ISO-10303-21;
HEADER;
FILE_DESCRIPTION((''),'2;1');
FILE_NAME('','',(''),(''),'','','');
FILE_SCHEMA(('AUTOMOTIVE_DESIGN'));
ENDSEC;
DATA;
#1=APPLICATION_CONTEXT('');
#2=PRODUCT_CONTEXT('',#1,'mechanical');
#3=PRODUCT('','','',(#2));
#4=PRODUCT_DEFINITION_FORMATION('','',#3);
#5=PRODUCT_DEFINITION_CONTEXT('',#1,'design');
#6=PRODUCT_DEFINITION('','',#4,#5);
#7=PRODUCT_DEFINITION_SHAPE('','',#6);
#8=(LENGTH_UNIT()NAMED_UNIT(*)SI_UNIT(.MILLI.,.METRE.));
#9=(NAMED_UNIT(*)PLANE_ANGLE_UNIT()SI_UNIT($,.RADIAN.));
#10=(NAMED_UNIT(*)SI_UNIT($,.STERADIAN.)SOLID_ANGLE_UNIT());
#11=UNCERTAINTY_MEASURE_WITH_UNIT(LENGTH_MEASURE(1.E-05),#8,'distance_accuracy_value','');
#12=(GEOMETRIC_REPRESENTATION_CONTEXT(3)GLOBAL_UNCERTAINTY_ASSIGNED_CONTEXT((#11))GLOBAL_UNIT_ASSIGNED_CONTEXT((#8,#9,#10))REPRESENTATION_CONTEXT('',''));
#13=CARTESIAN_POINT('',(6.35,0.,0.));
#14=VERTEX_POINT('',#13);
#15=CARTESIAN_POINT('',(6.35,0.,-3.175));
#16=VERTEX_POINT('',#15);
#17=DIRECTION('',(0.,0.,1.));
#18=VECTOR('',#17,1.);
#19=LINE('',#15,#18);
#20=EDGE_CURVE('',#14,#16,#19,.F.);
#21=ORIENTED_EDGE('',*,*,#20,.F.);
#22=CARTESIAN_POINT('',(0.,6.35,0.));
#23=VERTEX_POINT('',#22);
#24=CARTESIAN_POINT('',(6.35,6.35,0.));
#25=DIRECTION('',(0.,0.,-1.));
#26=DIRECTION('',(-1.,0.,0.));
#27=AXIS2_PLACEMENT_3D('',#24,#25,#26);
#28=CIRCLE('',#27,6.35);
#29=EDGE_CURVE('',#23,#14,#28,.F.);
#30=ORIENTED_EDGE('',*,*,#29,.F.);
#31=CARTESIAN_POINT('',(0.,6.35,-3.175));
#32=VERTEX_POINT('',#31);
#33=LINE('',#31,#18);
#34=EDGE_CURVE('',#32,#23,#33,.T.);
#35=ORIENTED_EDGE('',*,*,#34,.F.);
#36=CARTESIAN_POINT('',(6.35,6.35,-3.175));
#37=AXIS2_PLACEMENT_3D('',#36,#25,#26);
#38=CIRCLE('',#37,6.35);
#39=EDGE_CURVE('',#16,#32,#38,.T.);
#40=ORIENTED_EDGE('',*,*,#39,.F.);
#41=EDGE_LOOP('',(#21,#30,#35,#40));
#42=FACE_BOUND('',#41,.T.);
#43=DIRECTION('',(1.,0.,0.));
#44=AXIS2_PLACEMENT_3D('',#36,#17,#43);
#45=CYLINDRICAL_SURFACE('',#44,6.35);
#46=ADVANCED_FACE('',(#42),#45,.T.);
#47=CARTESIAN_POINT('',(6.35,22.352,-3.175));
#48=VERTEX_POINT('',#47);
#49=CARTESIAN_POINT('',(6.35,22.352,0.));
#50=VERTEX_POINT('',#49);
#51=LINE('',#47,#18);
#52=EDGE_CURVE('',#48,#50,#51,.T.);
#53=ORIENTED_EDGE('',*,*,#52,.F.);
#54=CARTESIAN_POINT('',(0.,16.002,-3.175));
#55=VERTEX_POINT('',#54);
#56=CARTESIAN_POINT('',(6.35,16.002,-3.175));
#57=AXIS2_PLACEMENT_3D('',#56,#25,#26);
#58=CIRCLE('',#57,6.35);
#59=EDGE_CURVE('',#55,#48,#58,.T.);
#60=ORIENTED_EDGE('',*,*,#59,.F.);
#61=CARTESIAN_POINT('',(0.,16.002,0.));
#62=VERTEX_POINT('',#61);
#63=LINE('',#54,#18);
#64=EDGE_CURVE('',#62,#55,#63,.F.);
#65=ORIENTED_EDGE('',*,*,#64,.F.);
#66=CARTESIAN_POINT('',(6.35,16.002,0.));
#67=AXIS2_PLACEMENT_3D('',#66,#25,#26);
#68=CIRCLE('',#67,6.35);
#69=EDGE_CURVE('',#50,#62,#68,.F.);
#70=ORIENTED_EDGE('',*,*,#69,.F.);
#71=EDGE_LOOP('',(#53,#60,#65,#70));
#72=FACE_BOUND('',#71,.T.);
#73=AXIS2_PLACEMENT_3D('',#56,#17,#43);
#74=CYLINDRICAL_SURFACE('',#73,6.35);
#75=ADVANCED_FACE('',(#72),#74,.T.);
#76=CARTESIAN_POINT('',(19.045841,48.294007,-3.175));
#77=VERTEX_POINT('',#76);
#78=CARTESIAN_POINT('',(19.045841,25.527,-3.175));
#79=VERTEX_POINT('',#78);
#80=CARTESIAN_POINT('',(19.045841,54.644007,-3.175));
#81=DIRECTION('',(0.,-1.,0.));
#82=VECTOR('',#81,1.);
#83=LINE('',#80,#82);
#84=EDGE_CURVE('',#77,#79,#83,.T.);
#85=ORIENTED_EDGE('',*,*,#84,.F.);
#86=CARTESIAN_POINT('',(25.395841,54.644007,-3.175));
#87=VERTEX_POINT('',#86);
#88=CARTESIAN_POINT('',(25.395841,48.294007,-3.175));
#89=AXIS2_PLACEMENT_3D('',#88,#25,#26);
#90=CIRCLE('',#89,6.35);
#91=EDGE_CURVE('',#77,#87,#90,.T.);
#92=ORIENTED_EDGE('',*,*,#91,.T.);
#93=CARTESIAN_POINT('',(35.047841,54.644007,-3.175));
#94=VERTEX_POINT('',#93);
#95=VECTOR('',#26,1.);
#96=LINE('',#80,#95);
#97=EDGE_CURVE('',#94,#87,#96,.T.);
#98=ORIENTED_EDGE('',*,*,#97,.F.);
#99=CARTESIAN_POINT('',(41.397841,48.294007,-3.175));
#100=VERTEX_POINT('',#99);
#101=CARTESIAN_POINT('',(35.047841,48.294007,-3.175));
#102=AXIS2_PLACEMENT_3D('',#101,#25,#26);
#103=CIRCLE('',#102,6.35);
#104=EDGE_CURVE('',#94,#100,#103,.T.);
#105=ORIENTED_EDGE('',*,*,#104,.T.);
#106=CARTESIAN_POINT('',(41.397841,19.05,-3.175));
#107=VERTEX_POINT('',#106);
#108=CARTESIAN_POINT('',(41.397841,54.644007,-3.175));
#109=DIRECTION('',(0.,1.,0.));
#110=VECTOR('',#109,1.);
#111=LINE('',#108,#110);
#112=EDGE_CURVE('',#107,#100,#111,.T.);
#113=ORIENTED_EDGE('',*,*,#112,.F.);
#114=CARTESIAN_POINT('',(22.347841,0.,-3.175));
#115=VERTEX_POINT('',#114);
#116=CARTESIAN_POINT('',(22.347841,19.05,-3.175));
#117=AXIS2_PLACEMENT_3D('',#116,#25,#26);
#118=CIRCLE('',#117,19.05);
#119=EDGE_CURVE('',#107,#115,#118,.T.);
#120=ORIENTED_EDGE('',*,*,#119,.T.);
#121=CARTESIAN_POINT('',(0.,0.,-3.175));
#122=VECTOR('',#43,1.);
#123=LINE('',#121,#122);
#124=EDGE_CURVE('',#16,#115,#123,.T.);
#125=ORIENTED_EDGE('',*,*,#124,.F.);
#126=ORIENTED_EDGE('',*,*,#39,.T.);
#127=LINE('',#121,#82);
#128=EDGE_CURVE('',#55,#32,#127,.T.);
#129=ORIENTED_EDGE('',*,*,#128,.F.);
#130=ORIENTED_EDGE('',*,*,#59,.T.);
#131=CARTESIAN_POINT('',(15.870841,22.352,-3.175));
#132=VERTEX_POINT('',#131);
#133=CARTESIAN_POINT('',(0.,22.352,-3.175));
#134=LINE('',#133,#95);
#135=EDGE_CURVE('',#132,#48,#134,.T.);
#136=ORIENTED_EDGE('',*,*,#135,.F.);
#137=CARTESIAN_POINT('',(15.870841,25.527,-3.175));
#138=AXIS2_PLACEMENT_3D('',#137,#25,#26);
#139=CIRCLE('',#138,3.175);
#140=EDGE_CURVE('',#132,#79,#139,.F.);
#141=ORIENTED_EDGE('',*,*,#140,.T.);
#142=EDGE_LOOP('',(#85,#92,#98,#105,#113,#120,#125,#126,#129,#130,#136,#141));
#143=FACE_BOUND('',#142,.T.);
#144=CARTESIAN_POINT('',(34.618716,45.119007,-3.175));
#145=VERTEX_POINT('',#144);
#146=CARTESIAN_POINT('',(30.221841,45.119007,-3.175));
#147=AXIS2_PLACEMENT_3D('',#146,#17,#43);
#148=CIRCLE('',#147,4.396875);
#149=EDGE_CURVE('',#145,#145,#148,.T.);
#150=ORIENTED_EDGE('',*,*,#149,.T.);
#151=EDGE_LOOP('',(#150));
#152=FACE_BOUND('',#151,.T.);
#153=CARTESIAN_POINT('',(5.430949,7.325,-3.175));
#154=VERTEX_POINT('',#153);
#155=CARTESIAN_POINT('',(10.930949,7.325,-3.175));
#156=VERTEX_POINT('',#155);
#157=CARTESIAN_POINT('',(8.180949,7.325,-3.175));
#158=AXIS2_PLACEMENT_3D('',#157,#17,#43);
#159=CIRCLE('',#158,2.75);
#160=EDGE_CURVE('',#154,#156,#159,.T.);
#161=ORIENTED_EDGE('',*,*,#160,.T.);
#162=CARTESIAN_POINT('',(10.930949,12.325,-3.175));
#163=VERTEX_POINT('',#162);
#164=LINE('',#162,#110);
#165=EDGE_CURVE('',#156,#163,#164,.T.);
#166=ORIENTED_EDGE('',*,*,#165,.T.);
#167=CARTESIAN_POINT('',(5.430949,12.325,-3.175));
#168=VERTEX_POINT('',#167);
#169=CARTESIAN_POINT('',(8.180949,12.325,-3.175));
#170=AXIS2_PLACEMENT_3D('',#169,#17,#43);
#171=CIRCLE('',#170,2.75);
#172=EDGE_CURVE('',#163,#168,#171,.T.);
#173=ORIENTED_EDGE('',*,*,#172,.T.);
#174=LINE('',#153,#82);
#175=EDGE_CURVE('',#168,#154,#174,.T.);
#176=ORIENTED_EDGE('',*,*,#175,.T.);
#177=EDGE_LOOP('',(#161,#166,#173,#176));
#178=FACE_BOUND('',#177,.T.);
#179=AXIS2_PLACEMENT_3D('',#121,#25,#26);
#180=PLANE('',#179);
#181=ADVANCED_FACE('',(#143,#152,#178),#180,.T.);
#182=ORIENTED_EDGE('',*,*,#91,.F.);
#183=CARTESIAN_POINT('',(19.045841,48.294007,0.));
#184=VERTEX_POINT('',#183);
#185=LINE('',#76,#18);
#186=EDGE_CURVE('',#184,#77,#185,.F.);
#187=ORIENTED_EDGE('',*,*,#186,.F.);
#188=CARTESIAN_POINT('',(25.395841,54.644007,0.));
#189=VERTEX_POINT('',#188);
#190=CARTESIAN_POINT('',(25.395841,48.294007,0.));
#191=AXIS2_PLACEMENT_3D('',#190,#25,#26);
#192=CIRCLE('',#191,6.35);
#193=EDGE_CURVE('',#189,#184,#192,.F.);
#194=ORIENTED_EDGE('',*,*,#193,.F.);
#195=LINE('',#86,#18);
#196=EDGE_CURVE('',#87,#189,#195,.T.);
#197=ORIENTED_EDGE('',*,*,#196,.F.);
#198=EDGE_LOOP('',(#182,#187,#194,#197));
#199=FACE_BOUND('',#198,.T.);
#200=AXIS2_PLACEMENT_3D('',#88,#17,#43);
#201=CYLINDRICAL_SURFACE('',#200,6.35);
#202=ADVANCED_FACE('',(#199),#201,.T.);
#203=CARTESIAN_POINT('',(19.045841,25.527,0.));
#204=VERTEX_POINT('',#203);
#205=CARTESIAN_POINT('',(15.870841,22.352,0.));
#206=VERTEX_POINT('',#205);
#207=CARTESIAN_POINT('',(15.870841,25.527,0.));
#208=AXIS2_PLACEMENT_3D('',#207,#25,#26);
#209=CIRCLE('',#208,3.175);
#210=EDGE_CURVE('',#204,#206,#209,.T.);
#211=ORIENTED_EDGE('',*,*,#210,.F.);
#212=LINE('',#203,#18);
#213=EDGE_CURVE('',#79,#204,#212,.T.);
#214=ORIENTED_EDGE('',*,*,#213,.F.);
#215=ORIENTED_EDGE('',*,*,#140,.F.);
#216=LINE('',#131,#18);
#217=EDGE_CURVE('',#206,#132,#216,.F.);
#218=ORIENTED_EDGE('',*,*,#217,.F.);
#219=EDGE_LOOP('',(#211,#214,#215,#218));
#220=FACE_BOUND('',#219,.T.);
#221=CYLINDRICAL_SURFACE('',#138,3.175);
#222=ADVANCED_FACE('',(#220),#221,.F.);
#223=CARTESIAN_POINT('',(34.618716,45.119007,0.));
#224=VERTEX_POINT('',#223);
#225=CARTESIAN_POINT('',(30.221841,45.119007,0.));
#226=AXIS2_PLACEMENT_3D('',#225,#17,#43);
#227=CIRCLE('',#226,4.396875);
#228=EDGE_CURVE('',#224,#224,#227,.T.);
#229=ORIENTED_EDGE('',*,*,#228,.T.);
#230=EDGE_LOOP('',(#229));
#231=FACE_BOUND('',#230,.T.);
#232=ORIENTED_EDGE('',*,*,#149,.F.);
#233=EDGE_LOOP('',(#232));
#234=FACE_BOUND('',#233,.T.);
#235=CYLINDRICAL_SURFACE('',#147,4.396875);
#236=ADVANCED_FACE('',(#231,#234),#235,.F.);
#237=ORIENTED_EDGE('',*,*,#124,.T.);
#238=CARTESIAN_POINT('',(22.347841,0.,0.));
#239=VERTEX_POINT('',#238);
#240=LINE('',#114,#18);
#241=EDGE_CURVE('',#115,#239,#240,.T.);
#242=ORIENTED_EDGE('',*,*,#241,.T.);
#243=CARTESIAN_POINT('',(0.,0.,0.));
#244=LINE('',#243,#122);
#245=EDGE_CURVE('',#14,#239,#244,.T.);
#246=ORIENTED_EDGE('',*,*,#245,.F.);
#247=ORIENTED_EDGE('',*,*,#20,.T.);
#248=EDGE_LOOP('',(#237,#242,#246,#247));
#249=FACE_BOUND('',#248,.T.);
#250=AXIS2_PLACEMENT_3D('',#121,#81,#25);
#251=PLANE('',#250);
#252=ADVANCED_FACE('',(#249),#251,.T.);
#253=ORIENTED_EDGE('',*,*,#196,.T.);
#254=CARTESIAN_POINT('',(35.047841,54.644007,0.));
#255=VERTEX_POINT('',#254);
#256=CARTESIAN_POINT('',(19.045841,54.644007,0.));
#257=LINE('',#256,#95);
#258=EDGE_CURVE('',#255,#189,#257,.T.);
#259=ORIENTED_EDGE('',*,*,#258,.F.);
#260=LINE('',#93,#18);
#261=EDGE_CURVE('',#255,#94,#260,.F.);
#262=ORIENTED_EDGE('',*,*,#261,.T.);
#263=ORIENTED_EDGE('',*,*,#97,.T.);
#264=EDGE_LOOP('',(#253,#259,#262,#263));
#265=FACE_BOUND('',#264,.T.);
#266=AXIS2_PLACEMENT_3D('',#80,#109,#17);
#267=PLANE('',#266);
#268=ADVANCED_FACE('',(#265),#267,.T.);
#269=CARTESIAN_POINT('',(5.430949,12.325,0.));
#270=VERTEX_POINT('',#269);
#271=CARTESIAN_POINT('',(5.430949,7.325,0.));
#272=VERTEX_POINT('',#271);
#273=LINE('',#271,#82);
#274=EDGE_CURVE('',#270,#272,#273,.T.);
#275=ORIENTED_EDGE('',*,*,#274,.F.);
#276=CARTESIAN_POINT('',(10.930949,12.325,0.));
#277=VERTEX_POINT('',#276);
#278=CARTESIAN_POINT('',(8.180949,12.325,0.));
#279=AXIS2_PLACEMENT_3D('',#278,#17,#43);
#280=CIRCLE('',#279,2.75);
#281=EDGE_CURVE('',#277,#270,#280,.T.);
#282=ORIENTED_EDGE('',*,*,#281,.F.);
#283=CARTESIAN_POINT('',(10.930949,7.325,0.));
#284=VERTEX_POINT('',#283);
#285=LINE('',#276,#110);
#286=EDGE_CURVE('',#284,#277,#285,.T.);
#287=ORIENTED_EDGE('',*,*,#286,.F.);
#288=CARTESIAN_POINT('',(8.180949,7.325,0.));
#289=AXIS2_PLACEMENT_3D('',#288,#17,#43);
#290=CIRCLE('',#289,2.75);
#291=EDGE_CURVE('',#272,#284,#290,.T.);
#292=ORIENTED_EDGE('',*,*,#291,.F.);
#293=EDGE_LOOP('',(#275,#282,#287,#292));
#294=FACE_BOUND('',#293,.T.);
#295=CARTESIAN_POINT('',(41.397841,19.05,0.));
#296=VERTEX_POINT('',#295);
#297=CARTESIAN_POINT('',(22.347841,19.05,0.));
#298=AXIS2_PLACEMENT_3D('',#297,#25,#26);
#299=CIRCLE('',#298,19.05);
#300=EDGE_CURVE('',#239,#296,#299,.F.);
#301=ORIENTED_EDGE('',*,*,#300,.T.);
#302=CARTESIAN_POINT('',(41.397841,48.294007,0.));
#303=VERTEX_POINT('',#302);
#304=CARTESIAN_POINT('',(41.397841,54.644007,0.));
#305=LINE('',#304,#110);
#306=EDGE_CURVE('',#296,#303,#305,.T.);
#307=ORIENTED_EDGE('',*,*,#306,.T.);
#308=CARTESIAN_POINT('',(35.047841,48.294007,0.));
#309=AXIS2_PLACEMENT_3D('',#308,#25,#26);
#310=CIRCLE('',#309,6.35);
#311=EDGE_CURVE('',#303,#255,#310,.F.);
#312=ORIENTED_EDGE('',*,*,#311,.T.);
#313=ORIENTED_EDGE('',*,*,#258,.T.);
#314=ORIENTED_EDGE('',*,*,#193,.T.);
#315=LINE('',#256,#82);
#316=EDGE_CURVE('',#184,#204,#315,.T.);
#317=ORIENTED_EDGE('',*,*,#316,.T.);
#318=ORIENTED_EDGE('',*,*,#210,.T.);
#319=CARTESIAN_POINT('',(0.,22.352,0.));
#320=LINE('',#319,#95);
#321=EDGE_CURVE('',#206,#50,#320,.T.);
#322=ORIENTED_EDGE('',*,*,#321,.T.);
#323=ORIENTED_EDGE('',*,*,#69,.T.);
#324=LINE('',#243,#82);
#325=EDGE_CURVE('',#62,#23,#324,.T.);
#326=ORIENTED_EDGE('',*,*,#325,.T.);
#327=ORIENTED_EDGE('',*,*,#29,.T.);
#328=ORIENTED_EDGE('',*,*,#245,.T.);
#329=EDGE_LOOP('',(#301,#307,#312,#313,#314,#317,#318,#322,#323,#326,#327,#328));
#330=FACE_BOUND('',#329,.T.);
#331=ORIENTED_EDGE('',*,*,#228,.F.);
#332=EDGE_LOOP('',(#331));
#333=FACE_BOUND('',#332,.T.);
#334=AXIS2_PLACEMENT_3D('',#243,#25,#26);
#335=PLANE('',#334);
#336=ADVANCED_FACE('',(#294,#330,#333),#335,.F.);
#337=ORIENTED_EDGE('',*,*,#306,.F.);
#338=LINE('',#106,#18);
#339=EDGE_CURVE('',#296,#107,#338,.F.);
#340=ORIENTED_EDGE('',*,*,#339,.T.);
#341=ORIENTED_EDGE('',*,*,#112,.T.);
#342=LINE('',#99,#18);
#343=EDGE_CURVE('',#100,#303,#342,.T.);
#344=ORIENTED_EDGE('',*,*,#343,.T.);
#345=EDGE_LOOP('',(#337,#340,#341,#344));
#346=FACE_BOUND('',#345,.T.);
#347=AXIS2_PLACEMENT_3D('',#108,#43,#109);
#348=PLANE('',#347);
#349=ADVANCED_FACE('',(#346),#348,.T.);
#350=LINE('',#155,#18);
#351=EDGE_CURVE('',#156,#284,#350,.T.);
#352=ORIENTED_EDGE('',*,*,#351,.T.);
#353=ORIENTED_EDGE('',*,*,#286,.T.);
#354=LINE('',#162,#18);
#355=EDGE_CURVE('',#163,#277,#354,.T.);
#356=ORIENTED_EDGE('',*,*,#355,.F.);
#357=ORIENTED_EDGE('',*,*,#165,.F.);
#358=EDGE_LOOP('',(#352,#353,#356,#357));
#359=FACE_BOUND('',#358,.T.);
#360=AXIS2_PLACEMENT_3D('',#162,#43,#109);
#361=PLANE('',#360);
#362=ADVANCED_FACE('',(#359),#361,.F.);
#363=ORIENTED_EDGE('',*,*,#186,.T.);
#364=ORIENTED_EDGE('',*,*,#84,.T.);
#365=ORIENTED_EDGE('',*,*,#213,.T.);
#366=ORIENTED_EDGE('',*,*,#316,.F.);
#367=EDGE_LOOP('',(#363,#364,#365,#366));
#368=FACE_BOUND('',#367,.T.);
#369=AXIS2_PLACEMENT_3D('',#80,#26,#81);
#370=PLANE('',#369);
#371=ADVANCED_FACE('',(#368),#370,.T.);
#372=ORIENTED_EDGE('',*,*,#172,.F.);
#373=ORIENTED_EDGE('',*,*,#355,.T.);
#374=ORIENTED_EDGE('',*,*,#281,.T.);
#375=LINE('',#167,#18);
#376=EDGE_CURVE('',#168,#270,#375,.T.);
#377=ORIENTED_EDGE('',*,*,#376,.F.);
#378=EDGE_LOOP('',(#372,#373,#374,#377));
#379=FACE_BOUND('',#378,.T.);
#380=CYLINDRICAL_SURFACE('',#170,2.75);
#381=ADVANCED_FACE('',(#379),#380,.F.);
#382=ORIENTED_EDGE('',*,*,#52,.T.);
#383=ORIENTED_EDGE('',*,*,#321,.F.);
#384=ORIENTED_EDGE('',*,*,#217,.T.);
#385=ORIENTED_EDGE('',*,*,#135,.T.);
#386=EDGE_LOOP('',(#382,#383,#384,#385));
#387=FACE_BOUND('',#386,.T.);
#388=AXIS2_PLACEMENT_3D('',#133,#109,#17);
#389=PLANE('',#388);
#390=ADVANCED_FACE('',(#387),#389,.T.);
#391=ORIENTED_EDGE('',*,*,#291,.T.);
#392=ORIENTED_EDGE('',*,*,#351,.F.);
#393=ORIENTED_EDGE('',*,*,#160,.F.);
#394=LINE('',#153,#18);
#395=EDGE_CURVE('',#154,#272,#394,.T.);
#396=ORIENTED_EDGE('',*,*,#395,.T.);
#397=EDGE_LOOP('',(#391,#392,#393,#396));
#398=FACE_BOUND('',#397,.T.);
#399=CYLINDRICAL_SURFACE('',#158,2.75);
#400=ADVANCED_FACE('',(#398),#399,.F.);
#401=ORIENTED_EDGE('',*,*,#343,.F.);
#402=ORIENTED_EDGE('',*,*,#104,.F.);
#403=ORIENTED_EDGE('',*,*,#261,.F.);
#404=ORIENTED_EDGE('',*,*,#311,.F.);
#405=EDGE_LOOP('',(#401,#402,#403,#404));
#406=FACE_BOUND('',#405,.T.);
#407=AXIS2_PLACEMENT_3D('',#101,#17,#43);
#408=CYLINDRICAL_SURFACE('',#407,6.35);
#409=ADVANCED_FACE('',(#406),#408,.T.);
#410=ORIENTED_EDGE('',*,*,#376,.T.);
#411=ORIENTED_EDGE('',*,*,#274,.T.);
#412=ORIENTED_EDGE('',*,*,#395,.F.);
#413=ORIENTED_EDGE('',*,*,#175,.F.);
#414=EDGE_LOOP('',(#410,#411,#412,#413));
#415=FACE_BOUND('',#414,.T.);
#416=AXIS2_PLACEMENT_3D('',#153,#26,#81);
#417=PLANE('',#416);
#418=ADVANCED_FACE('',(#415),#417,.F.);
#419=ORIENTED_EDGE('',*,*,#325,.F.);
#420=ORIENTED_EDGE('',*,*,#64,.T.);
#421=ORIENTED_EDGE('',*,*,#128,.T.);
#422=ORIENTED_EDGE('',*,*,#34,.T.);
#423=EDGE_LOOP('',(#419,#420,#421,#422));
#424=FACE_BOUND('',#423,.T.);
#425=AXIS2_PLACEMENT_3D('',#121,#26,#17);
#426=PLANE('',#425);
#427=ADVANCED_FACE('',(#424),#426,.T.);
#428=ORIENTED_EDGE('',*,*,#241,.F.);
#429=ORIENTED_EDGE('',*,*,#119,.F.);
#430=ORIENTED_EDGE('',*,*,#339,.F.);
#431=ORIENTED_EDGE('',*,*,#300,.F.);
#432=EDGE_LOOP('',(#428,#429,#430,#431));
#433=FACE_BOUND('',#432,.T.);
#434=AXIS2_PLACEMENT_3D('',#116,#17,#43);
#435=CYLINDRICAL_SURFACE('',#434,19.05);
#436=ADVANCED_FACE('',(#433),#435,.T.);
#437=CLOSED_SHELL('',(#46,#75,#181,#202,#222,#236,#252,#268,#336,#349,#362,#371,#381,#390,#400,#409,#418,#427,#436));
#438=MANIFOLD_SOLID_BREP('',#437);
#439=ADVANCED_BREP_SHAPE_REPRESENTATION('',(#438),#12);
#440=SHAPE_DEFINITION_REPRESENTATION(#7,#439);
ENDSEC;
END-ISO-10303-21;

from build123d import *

# Parameters (mm, degrees)
BASE_FLANGE1_DEPTH = 3.175
FILLET1_R          = 6.35
FILLET2_R          = 19.05
FILLET3_R          = 3.175
SKETCH3_R          = 4.396875001
CUT_EXTRUDE1_DEPTH = 3.175


# Sheet-metal steps are written as plain solids
with BuildPart() as part:
    # Sketch1 → Base-Flange1 (new body)
    with BuildSketch(Plane.XY):
        Polygon((0, 0), (41.397840965, 0), (41.397840965, 54.644007143), (19.045840965, 54.644007143), (19.045840965, 22.352), (0, 22.352), align=None)
    extrude(amount=-BASE_FLANGE1_DEPTH)

    # Fillet1
    fillet1_edges = [part.edges().sort_by_distance(p)[0] for p in [
        (0, 22.352, -1.5875),
        (19.045840965, 54.644007143, -1.5875),
        (41.397840965, 54.644007143, -1.5875),
        (0, 0, -1.5875),
    ]]
    fillet(fillet1_edges, radius=FILLET1_R)

    # Fillet2
    fillet2_edges = [part.edges().sort_by_distance(p)[0] for p in [
        (41.397840965, 0, -1.5875),
    ]]
    fillet(fillet2_edges, radius=FILLET2_R)

    # Fillet3
    fillet3_edges = [part.edges().sort_by_distance(p)[0] for p in [
        (19.045840965, 22.352, -1.5875),
    ]]
    fillet(fillet3_edges, radius=FILLET3_R)

    # Sketch3 → Cut-Extrude1 (cut)
    with BuildSketch(Plane.XY):
        with Locations((30.221840965, 45.119007143)):
            Circle(SKETCH3_R)
        with BuildLine():
            Line((10.93094867, 12.325), (10.93094867, 7.325))
            ThreePointArc((10.93094867, 7.325), (8.18094867, 4.575), (5.43094867, 7.325))
            Line((5.43094867, 7.325), (5.43094867, 12.325))
            ThreePointArc((5.43094867, 12.325), (8.18094867, 15.075), (10.93094867, 12.325))
        make_face()
    extrude(amount=-CUT_EXTRUDE1_DEPTH, mode=Mode.SUBTRACT)


solid = part.part
